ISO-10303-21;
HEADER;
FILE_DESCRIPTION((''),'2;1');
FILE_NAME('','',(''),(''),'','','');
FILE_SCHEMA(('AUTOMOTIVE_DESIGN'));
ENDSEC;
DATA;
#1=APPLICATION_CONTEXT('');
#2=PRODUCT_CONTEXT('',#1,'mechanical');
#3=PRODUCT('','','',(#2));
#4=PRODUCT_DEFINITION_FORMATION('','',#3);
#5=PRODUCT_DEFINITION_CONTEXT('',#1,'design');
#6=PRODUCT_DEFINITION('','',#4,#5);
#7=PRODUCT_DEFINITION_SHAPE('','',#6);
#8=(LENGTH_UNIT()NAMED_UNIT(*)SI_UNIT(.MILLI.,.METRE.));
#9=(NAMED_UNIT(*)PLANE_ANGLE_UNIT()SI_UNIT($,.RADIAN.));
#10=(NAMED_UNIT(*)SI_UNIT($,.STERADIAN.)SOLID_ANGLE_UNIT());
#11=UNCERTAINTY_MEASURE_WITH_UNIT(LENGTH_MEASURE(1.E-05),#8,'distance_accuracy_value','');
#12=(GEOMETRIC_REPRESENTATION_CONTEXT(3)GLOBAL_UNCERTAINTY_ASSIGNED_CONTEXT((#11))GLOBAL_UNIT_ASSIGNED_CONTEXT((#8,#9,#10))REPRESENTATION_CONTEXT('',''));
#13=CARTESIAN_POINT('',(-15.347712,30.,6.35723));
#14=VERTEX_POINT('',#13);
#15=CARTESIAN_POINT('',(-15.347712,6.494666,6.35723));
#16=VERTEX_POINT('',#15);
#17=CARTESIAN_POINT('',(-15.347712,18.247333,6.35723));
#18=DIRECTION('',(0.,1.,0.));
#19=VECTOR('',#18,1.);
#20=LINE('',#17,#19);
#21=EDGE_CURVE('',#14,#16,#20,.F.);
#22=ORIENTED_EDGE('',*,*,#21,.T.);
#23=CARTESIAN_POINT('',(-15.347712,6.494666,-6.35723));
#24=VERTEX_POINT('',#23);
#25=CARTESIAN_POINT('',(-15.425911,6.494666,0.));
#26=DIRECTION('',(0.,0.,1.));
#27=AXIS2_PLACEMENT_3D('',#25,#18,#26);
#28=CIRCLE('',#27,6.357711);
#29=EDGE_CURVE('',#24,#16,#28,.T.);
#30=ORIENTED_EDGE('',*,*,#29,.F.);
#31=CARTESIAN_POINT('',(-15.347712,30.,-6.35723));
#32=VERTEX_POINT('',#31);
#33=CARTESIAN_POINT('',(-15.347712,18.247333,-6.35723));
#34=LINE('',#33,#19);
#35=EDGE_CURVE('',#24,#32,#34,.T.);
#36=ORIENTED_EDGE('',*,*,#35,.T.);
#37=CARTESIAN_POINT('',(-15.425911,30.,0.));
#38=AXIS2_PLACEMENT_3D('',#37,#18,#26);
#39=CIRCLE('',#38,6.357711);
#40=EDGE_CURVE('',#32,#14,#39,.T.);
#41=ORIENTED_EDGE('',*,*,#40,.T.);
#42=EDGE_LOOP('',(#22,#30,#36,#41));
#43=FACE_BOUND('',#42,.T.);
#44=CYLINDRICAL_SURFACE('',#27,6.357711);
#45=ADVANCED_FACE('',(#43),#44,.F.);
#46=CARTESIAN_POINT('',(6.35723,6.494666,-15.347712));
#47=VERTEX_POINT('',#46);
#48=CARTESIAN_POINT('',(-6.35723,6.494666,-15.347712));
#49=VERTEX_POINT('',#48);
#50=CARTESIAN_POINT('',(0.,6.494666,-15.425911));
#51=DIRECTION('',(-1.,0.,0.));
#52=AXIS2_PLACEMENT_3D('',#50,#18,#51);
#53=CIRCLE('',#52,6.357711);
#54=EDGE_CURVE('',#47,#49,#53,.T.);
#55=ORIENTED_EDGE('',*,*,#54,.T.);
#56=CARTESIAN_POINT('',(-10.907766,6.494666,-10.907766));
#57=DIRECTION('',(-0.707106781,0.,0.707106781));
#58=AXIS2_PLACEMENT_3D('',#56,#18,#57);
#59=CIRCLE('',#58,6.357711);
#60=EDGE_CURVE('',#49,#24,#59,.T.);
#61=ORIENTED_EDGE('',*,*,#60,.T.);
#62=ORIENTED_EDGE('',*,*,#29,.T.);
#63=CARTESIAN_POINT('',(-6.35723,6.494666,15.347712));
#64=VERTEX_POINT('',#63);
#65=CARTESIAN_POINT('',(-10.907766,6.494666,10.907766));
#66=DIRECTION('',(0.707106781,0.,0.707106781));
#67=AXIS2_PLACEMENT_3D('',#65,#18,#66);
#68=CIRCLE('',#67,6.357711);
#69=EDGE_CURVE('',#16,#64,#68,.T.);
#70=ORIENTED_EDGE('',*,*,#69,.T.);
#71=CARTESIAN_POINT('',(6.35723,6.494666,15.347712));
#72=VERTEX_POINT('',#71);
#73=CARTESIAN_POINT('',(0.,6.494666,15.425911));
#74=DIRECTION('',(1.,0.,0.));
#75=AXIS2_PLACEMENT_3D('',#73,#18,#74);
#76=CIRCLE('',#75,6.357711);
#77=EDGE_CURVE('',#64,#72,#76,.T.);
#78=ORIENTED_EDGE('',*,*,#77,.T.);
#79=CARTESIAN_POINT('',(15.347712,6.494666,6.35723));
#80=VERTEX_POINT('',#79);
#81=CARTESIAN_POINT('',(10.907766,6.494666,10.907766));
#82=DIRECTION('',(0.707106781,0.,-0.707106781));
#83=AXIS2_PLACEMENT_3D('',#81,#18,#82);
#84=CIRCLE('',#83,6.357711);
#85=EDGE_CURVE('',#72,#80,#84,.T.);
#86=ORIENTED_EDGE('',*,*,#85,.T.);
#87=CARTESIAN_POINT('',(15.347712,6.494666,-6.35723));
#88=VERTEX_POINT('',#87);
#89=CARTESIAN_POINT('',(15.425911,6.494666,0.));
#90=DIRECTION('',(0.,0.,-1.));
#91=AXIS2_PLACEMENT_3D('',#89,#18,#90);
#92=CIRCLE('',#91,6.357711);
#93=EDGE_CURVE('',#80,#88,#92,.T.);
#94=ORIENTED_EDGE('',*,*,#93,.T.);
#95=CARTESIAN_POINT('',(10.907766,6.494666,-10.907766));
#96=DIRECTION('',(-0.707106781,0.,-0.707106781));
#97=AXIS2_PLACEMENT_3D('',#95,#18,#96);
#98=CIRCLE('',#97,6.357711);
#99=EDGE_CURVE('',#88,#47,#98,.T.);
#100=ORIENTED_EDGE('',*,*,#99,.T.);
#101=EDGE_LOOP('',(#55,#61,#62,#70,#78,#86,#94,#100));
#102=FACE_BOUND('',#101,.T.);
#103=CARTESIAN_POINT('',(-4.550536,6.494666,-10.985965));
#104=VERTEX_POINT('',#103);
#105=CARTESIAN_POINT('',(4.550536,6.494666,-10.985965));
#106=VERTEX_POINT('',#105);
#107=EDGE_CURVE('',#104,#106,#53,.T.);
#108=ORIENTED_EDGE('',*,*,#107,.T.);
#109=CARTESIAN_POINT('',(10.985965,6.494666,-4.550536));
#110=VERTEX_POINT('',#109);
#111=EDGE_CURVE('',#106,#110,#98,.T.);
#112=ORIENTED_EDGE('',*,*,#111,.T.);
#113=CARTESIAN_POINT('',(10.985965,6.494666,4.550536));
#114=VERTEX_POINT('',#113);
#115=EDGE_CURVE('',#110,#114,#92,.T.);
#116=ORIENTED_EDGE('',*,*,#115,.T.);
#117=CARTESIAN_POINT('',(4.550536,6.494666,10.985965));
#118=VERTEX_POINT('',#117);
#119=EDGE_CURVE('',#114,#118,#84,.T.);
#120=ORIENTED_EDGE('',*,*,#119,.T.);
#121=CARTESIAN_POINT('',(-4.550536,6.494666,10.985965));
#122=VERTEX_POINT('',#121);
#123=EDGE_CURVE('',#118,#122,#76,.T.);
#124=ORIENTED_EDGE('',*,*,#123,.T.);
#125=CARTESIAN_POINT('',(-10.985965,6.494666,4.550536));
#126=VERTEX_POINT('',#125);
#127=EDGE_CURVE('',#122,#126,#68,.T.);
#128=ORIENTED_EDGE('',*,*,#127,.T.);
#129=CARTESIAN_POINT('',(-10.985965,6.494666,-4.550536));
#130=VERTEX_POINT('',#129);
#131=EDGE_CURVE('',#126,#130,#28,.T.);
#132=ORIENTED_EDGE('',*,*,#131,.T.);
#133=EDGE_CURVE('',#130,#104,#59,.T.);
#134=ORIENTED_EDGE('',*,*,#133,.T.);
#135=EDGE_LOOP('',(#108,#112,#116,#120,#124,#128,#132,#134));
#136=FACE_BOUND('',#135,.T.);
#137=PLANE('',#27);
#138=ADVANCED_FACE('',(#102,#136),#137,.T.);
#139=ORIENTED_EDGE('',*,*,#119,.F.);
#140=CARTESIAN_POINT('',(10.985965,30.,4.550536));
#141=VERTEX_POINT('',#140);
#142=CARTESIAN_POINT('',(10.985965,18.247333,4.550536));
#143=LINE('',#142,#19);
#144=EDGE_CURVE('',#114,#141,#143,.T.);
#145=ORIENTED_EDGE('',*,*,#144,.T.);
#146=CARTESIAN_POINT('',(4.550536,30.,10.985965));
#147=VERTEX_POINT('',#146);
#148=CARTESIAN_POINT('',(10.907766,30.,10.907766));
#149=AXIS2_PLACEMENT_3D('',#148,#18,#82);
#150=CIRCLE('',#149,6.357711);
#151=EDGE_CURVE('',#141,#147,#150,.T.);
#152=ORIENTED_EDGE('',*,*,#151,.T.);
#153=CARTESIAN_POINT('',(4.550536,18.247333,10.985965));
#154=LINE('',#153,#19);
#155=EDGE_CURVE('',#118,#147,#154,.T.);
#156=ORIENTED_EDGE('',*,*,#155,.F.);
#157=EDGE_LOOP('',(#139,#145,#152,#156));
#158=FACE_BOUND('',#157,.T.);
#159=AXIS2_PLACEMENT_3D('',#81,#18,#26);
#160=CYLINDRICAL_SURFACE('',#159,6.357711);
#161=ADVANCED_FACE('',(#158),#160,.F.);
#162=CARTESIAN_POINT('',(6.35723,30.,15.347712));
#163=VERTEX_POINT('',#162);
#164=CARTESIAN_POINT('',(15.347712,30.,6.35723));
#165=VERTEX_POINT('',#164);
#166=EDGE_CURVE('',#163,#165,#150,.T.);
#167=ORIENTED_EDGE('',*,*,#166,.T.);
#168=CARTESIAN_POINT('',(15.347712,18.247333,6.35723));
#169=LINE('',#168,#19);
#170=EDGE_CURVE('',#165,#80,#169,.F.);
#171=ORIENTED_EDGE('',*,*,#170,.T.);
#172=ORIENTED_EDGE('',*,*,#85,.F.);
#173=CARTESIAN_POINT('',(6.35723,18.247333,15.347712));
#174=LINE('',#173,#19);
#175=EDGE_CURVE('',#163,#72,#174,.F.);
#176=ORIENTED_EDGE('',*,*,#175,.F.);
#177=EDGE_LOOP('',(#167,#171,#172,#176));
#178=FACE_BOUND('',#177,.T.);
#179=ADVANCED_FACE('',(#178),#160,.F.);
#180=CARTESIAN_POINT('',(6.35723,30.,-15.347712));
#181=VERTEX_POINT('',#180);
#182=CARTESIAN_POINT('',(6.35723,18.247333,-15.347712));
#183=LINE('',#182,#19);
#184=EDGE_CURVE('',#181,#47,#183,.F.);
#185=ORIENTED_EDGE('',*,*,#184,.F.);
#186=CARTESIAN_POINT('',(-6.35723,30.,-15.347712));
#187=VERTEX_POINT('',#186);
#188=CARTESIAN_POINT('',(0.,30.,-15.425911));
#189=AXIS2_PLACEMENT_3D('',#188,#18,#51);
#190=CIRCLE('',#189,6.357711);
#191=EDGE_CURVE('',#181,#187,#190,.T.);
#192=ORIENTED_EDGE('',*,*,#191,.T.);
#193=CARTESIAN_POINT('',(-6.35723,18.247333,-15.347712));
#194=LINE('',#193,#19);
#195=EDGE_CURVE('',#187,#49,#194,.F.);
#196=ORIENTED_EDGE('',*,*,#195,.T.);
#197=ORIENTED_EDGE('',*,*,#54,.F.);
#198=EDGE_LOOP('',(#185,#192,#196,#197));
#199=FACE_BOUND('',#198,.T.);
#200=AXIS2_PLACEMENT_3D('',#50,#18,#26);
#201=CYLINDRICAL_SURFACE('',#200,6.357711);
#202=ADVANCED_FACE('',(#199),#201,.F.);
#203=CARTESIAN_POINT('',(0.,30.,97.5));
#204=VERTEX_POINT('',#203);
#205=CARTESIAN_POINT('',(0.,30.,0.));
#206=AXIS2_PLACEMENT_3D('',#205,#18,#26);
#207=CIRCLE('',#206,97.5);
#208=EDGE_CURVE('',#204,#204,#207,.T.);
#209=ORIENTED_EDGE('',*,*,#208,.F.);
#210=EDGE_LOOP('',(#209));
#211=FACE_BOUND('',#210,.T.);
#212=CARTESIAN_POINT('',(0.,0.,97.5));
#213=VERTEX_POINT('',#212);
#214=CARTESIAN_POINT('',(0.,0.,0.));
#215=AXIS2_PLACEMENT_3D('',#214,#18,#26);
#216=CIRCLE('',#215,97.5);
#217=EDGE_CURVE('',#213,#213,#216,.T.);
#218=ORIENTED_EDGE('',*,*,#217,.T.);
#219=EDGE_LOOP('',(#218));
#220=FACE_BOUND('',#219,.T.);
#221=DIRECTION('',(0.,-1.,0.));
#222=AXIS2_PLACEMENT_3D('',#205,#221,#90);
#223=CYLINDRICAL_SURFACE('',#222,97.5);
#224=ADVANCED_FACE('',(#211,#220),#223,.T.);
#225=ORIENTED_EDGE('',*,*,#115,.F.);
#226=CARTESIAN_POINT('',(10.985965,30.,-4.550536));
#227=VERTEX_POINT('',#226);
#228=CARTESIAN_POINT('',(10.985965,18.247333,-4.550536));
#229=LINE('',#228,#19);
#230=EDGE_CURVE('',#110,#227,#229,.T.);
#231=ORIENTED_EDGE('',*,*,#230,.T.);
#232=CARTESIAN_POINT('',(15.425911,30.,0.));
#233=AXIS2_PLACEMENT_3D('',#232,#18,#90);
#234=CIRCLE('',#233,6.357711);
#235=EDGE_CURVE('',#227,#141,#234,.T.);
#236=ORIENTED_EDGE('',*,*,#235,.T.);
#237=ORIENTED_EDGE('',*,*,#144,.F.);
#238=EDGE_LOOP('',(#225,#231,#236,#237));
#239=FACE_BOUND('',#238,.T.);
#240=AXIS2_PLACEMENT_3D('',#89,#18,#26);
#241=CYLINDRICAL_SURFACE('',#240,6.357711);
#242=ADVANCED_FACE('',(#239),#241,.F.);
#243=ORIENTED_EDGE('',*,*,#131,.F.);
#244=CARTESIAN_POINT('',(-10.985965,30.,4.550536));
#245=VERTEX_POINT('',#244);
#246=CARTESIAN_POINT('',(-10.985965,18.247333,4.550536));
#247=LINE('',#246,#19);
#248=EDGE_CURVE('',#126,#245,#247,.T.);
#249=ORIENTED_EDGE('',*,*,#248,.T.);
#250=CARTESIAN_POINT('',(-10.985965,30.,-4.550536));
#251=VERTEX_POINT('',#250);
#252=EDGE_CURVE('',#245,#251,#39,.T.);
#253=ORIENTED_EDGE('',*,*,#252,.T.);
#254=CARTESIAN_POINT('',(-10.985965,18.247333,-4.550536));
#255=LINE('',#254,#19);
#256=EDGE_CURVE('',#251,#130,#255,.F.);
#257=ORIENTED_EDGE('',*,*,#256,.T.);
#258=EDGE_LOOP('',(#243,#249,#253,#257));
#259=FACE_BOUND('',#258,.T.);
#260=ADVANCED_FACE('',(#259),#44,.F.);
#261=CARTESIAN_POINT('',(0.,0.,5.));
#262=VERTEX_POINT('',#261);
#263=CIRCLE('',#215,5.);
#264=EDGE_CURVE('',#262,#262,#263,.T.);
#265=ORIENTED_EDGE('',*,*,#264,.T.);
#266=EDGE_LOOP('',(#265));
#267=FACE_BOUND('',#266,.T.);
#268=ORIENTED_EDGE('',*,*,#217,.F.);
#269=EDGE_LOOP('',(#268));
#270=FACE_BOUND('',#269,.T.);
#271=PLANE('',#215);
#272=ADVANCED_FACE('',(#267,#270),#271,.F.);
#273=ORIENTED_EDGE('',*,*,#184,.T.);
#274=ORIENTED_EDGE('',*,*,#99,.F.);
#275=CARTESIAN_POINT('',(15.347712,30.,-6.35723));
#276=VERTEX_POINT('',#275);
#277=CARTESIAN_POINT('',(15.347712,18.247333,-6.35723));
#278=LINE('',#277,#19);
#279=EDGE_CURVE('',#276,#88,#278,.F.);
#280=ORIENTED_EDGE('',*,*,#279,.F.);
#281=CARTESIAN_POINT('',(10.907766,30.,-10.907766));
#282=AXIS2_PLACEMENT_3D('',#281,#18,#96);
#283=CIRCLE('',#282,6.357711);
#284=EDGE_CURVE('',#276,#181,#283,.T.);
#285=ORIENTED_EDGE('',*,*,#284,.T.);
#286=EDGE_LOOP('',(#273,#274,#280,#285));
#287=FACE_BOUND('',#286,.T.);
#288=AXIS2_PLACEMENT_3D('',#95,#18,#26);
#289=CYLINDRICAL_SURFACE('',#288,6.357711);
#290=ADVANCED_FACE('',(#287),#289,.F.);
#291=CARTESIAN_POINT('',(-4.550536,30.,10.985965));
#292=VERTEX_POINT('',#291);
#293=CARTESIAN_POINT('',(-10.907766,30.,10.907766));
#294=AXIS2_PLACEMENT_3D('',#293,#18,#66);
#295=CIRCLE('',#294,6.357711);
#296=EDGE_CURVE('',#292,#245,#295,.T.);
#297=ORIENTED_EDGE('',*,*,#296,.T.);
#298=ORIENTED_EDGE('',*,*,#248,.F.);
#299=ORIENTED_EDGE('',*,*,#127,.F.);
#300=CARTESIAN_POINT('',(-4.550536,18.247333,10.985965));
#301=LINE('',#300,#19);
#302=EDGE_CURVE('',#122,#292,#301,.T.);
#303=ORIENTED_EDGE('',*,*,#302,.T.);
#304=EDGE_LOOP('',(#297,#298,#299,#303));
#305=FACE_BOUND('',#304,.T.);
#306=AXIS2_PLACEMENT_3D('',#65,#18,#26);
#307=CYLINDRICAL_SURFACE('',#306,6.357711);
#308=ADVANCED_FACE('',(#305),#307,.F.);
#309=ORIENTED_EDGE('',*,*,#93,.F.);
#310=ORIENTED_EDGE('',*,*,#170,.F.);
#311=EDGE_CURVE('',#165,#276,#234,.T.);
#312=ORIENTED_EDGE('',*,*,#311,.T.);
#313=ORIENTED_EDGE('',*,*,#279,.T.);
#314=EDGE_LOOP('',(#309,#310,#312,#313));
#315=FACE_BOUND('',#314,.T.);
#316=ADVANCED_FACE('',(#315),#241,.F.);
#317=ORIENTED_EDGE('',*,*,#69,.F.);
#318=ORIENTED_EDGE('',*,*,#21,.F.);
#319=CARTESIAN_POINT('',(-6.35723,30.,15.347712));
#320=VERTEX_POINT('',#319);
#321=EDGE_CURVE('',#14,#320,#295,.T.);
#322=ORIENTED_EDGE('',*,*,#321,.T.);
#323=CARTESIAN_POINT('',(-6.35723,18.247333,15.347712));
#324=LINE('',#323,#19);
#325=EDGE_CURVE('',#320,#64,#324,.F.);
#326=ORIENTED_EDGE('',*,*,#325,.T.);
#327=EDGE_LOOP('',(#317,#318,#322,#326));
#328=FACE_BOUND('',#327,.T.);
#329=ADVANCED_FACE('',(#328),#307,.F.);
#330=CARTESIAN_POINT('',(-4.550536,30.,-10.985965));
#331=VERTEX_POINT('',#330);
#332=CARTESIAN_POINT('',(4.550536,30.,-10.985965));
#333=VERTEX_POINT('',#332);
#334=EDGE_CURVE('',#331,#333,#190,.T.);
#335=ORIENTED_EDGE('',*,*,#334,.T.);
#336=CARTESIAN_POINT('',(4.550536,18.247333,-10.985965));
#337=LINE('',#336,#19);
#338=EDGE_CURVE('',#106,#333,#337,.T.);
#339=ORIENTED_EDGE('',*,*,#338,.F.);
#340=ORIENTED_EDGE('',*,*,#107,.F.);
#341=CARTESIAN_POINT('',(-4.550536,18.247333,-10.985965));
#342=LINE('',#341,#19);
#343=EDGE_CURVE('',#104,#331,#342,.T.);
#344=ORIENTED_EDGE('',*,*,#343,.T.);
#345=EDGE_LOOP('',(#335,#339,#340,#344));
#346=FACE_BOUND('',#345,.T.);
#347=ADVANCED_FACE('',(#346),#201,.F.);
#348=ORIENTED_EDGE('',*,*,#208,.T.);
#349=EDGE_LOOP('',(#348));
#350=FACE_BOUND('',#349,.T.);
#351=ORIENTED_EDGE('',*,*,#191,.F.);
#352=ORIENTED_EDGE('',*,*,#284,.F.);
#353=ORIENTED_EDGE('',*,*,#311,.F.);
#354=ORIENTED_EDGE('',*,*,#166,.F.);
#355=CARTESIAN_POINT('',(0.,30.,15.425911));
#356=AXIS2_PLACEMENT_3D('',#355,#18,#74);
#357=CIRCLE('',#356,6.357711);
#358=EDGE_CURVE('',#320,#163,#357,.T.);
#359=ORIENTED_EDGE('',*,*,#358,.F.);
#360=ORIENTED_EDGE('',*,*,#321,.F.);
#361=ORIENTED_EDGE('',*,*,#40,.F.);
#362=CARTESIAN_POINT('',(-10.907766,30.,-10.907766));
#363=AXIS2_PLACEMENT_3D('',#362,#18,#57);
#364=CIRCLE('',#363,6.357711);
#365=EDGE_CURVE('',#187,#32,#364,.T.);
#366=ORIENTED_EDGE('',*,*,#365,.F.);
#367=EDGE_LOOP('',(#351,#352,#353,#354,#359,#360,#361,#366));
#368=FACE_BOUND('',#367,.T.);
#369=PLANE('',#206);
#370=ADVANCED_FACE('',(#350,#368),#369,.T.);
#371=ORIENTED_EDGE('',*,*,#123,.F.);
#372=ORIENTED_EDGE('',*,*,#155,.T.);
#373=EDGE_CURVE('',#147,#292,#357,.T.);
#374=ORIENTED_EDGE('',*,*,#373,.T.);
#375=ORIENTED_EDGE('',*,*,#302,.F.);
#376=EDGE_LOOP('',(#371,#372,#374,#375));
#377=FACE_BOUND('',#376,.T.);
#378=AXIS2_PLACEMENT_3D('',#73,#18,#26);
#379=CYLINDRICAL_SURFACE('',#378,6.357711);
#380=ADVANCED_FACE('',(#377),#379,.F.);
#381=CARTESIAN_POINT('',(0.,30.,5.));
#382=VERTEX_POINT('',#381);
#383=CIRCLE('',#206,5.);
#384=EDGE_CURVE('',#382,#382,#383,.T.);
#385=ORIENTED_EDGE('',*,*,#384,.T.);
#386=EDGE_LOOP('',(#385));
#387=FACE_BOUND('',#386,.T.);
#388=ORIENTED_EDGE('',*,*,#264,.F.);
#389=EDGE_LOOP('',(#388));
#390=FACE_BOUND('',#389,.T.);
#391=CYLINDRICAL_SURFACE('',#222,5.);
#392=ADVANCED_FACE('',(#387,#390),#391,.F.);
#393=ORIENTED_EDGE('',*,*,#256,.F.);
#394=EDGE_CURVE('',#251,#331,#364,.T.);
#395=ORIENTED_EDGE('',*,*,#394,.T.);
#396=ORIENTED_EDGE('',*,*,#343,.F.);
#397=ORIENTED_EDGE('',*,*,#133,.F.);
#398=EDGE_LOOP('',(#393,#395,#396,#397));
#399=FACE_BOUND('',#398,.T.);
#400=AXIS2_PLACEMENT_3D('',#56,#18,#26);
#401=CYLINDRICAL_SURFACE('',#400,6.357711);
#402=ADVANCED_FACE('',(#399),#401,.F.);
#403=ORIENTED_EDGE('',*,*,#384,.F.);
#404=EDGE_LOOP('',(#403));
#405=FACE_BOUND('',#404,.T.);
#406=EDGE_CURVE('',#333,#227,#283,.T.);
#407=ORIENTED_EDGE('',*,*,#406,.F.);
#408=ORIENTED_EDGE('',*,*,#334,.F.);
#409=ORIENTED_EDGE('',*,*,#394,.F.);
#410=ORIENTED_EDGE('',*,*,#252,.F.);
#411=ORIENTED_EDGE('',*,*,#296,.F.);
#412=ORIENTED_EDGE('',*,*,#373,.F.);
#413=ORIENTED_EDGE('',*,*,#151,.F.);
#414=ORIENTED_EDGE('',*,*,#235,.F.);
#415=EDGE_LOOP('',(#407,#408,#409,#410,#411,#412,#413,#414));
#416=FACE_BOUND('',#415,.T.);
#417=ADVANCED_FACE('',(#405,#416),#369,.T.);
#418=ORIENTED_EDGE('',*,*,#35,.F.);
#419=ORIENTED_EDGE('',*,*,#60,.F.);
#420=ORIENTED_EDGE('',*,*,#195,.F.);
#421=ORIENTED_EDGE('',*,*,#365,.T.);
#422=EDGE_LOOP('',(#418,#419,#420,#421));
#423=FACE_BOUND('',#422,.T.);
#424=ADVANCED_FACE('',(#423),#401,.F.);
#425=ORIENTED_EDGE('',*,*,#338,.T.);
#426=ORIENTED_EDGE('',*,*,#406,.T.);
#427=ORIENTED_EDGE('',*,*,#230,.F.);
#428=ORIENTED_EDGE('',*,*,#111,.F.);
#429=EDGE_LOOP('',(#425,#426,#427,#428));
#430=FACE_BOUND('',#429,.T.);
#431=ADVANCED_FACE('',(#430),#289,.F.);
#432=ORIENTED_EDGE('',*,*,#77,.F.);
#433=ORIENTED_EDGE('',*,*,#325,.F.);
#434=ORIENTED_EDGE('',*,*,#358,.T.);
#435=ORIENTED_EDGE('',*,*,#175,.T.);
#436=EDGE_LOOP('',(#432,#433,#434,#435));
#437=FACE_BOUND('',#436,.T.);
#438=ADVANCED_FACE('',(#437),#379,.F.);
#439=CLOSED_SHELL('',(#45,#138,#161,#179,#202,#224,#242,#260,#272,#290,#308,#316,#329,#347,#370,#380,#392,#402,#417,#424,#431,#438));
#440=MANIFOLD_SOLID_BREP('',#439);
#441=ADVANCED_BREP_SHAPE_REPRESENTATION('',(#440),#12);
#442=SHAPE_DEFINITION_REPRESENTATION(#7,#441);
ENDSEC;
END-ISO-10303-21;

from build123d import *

# Parameters (mm, degrees)
SKETCH1_R           = 97.5
BOSS_EXTRUDE1_DEPTH = 30
SKETCH2_R           = 5
CUT_EXTRUDE1_DEPTH  = 142.111657917
SKETCH3_R           = 6.357711216
CUT_EXTRUDE2_DEPTH  = 23.505333603
CIRPATTERN1_COUNT   = 8


with BuildPart() as part:
    # Sketch1 → Boss-Extrude1 (new body)
    with BuildSketch(Plane(origin=(0, 0, 0), x_dir=(1, 0, 0), z_dir=(0, 1, 0))):
        Circle(SKETCH1_R)
    extrude(amount=BOSS_EXTRUDE1_DEPTH)

    # Sketch2 → Cut-Extrude1 (cut, through all)
    with BuildSketch(Plane(origin=(0, 0, 0), x_dir=(1, 0, 0), z_dir=(0, 1, 0))):
        Circle(SKETCH2_R)
    extrude(amount=CUT_EXTRUDE1_DEPTH, mode=Mode.SUBTRACT)

    # Sketch3 → Cut-Extrude2 (cut)
    with BuildSketch(Plane(origin=(0, 30, 0), x_dir=(1, 0, 0), z_dir=(0, 1, 0))):
        with Locations((-15.425910616, 0)):
            Circle(SKETCH3_R)
    cut_extrude2 = extrude(amount=-CUT_EXTRUDE2_DEPTH, mode=Mode.SUBTRACT)

    # CirPattern1: Cut-Extrude2 ×8 about axis
    cirpattern1_axis = Axis((0, 0, 0), (0, 1, 0))
    for i in range(1, CIRPATTERN1_COUNT):
        add(cut_extrude2.rotate(cirpattern1_axis, i * 360 / CIRPATTERN1_COUNT), mode=Mode.SUBTRACT)


solid = part.part
